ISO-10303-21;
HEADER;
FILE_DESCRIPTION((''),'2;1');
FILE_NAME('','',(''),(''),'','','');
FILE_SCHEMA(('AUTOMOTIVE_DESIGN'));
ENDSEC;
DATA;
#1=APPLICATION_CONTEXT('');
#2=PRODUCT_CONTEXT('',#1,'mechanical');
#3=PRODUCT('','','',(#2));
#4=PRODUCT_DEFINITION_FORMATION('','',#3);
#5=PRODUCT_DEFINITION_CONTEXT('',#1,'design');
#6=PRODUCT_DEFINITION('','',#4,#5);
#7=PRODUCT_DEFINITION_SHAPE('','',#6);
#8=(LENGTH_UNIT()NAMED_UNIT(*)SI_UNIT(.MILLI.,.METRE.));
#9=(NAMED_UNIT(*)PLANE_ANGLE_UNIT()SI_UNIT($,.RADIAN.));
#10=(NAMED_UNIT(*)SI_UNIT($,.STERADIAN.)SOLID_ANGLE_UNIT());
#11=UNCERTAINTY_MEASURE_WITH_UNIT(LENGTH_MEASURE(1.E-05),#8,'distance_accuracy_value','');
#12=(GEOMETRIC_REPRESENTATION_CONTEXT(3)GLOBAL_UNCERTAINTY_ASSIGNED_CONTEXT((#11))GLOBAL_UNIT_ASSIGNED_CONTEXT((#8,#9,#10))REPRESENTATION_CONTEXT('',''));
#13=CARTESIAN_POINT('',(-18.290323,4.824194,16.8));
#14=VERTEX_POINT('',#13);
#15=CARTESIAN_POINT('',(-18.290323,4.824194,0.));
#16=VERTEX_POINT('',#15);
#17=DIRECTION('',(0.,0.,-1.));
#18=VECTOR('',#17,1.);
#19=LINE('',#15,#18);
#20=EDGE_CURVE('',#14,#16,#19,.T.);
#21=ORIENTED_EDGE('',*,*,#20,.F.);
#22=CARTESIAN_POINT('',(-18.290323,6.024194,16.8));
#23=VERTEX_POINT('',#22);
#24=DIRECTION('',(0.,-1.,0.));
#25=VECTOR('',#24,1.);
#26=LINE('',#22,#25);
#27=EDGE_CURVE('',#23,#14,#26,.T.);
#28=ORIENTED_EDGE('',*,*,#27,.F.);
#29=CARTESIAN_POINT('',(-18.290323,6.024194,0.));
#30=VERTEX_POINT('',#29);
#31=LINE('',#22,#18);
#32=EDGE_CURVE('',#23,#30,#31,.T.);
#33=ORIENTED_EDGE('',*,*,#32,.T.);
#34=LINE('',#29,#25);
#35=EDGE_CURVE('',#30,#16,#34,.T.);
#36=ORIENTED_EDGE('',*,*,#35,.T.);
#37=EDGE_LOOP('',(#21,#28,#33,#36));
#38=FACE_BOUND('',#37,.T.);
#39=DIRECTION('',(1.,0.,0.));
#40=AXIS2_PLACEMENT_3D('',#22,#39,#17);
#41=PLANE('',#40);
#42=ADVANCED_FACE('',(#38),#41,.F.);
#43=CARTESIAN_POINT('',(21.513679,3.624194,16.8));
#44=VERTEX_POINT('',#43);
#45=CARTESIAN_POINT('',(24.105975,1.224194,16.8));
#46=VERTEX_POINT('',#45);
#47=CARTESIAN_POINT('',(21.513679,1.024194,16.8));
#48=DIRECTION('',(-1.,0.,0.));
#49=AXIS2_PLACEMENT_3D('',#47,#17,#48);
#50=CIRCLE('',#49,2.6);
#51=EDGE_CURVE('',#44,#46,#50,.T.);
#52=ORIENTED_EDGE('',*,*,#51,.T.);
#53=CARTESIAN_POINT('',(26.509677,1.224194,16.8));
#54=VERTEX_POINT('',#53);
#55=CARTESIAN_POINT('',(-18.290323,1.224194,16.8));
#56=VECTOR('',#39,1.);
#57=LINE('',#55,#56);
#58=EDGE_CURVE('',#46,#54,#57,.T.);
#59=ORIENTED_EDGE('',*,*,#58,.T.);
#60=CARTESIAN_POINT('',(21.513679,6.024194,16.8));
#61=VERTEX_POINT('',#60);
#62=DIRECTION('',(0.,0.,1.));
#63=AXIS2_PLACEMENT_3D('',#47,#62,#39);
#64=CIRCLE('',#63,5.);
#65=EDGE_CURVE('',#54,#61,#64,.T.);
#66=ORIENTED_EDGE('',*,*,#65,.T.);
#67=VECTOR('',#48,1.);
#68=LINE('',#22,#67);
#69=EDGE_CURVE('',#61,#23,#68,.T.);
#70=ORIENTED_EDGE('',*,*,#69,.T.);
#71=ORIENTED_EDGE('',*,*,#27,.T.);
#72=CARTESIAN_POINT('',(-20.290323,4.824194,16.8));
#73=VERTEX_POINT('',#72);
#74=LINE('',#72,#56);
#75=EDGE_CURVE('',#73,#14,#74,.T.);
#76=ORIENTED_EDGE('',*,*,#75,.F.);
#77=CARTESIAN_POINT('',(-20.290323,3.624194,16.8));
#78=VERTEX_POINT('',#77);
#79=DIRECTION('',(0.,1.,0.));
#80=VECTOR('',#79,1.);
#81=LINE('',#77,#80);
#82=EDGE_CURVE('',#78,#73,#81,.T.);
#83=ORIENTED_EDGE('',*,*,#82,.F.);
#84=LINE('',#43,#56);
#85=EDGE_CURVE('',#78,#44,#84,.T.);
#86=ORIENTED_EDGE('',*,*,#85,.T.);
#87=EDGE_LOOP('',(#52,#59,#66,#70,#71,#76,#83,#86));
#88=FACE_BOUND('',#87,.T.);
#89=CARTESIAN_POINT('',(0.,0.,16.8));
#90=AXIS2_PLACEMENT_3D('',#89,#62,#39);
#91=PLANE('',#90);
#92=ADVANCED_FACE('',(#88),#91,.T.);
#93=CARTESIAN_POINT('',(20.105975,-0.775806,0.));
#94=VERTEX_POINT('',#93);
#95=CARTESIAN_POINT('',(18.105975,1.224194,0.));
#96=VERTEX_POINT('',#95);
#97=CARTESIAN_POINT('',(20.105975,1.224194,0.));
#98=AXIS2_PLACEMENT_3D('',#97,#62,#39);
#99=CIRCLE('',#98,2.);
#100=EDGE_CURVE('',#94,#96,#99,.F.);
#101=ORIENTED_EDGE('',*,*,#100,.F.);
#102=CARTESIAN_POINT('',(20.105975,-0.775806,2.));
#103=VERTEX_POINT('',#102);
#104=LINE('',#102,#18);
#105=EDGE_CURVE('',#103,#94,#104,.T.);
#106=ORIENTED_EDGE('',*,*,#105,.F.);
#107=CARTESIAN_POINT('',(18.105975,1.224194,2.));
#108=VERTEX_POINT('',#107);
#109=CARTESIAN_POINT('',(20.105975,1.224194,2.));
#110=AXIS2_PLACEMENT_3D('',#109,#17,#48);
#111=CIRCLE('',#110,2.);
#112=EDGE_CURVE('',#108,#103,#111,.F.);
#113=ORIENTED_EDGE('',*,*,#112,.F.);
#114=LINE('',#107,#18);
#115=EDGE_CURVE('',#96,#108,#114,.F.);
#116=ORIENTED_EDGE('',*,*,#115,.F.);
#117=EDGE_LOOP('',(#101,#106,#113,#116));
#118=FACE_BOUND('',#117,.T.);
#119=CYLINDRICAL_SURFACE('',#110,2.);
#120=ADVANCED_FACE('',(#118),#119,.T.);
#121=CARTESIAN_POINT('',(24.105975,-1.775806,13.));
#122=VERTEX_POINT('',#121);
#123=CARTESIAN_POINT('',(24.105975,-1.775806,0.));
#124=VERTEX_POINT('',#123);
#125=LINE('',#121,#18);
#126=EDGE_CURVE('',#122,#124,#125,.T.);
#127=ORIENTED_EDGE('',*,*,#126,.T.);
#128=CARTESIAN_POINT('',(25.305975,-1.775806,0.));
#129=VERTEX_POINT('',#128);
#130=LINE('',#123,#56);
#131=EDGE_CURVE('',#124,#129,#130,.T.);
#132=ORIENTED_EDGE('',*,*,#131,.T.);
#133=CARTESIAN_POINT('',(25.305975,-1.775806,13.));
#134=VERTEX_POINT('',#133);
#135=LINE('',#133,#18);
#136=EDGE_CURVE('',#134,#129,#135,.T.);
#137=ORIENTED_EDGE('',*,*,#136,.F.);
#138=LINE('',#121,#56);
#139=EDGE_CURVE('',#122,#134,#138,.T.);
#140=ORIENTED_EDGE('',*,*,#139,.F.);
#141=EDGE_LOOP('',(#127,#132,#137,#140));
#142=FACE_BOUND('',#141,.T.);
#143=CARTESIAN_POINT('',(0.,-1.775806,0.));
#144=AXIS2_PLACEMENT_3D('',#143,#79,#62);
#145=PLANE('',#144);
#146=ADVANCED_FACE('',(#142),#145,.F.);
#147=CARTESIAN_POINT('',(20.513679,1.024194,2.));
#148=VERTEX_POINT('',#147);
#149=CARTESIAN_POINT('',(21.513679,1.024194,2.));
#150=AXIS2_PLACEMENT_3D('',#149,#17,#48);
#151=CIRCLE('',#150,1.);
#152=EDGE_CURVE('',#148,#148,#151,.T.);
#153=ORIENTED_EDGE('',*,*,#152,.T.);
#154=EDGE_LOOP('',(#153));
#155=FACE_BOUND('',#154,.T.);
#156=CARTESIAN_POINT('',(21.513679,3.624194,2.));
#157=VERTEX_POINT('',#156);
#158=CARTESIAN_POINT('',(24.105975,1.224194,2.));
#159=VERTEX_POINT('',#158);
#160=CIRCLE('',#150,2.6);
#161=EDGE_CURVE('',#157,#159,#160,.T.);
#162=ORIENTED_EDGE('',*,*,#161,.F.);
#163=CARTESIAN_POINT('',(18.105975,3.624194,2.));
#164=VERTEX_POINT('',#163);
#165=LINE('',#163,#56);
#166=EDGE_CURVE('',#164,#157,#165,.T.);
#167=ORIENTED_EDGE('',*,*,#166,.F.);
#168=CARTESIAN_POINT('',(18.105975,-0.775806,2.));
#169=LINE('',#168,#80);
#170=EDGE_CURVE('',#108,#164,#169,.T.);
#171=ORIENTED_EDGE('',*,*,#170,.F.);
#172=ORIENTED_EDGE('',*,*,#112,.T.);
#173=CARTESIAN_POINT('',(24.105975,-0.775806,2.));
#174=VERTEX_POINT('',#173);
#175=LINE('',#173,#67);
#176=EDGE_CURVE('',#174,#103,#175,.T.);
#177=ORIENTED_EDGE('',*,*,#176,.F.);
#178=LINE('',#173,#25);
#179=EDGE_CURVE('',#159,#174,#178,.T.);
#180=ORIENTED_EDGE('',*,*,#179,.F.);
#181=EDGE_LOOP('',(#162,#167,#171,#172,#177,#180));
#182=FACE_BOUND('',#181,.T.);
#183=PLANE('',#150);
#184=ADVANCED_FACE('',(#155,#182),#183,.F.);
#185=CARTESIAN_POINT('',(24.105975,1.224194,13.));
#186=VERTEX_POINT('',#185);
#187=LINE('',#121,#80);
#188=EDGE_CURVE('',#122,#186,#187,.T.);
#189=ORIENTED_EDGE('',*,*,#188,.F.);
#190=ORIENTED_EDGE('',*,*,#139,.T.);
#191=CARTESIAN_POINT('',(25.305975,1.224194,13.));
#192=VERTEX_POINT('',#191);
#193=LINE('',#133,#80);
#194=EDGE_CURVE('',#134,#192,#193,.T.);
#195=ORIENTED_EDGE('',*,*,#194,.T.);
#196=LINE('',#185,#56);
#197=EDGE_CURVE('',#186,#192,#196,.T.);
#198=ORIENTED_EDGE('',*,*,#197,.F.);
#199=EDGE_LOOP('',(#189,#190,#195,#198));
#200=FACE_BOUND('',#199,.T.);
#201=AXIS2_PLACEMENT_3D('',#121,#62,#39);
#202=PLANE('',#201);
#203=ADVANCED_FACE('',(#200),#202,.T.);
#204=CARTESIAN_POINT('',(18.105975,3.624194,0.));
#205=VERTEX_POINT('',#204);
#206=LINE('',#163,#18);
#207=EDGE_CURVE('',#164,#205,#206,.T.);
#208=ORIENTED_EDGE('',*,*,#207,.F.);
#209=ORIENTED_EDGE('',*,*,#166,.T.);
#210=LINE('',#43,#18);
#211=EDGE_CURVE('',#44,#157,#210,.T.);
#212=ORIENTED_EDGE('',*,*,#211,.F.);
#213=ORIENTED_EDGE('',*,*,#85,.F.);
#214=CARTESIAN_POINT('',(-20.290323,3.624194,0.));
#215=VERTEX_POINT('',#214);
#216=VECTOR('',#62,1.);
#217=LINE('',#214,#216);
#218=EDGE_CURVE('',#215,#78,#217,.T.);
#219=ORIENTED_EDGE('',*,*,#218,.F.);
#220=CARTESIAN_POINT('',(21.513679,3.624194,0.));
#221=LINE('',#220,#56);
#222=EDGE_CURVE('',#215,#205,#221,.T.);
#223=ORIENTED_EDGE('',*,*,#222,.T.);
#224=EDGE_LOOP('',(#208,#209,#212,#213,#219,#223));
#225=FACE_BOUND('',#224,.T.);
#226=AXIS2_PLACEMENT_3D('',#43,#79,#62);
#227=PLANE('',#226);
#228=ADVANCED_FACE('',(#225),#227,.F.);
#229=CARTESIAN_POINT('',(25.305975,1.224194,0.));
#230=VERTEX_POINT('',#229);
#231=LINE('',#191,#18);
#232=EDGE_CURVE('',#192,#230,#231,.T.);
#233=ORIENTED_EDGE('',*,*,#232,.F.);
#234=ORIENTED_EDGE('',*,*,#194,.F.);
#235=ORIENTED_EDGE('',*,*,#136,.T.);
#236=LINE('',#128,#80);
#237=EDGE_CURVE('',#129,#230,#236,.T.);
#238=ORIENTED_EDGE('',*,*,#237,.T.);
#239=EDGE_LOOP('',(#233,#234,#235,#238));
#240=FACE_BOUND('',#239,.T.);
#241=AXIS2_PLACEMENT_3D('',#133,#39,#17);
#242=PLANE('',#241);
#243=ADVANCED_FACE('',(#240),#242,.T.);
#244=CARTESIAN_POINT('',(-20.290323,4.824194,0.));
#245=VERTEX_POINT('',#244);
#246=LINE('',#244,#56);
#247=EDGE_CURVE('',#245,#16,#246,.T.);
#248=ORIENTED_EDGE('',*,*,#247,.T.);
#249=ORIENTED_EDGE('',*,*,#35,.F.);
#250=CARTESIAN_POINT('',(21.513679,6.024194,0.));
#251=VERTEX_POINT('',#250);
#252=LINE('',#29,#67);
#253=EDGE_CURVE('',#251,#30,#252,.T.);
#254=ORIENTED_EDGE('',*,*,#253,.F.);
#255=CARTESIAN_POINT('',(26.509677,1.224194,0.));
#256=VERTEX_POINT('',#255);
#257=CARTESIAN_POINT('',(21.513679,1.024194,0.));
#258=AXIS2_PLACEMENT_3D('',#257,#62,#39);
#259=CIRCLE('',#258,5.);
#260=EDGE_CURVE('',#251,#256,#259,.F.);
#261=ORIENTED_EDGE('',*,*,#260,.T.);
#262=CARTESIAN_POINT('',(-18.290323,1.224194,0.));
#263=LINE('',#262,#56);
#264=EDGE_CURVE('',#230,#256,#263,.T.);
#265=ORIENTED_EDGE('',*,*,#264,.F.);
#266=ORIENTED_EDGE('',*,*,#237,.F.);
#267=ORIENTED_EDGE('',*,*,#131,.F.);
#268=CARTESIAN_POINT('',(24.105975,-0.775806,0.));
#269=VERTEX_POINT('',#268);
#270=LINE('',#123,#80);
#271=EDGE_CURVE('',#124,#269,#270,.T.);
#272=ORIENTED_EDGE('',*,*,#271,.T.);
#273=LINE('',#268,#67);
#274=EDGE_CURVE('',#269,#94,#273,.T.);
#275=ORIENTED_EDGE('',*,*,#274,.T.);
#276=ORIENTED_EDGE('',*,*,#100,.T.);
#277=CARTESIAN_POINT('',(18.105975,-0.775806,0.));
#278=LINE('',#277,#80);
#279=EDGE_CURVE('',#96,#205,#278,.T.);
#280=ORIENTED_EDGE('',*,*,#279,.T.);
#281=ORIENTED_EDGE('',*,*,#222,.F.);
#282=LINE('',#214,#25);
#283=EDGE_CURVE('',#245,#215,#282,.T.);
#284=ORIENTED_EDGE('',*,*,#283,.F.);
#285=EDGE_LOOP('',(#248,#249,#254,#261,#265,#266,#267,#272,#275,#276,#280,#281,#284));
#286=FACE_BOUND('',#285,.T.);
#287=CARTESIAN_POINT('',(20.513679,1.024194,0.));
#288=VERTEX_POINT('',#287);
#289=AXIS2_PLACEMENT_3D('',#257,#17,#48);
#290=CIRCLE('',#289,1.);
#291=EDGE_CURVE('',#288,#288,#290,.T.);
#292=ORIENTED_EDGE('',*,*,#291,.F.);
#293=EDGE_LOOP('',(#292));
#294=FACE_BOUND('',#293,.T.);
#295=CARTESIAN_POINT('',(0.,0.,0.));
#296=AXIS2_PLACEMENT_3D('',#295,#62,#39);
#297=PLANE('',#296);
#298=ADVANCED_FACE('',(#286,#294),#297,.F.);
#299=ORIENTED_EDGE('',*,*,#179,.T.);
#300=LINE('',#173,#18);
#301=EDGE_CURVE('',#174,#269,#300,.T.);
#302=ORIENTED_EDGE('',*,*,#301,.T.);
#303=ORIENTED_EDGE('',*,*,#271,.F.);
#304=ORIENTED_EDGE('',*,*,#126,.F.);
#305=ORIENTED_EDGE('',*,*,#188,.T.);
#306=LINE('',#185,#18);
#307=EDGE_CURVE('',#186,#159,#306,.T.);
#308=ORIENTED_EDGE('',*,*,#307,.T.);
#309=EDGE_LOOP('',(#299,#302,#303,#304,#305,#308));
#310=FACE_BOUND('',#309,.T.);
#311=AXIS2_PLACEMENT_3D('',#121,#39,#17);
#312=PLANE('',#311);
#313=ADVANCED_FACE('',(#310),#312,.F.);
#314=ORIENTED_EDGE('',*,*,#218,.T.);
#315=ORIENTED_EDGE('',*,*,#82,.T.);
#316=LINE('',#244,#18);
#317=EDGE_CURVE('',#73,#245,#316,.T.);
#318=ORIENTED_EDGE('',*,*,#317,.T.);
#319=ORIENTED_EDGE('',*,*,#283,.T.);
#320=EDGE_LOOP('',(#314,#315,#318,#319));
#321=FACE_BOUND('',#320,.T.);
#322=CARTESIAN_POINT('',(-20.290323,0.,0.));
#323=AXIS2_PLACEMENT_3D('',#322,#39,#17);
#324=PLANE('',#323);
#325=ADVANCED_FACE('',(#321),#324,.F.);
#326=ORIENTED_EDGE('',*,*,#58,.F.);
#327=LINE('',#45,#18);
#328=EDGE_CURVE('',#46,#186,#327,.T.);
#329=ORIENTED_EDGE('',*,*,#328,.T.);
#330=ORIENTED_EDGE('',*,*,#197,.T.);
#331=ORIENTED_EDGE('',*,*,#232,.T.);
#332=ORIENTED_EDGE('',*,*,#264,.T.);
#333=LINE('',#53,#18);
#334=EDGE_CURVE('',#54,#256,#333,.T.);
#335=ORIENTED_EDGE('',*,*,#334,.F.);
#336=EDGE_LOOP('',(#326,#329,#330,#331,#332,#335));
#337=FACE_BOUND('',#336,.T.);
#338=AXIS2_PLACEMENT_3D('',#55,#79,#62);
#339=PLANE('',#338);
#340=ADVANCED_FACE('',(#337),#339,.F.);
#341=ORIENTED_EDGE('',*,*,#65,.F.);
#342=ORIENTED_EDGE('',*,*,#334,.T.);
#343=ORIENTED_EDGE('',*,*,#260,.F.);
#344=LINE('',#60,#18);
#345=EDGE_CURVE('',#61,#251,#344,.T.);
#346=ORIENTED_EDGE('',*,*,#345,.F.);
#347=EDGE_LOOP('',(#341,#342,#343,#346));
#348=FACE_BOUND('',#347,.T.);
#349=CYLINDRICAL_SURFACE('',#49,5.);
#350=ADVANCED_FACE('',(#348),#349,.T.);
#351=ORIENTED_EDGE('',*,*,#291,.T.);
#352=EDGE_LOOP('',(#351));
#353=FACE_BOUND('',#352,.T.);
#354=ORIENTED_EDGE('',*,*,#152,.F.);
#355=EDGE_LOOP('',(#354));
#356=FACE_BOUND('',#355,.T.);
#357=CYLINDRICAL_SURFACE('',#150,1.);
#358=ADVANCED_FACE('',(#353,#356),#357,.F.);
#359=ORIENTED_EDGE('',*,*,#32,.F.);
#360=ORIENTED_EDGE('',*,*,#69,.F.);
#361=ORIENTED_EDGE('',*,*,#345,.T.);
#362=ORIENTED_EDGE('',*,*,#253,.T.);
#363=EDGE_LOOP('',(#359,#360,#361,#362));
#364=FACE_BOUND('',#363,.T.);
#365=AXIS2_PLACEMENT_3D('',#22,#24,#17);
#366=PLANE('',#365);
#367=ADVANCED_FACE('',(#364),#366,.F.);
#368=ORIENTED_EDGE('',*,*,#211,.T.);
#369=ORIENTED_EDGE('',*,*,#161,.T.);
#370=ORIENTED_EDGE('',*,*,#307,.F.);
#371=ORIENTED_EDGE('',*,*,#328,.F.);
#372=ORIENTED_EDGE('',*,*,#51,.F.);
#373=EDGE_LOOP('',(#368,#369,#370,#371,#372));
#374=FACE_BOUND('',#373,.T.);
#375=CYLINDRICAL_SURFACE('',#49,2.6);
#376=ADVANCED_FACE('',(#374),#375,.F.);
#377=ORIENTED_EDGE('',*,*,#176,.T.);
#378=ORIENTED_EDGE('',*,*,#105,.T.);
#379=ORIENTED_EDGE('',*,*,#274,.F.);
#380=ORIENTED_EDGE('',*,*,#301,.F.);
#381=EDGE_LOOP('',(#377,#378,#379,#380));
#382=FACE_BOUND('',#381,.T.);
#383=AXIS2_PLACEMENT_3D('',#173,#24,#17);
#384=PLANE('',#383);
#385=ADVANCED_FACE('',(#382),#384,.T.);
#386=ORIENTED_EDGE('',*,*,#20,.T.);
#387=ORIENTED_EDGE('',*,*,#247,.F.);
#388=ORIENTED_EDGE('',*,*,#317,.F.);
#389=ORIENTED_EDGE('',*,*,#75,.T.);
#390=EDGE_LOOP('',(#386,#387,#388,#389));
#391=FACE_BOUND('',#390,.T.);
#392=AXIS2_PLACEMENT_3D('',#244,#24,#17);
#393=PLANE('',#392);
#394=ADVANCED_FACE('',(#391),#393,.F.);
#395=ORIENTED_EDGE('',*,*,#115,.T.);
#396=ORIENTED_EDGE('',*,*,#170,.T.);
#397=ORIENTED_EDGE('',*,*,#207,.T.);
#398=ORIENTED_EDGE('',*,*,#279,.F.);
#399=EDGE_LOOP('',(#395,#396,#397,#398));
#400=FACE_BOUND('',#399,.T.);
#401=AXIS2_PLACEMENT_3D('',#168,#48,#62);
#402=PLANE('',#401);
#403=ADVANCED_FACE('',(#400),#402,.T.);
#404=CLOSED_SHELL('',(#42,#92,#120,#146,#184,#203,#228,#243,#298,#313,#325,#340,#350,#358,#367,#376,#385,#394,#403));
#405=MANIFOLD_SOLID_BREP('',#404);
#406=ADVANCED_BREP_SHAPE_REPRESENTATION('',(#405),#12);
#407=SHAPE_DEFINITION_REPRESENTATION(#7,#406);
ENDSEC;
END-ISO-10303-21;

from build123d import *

# Parameters (mm, degrees)
SKETCH1_W           = 44.8
SKETCH1_H           = 4.8
BOSS_EXTRUDE1_DEPTH = 16.8
FILLET1_R           = 5
CUT_EXTRUDE1_DEPTH  = 32.95768929
SKETCH3_W           = 1.2
SKETCH3_H           = 13
BOSS_EXTRUDE2_DEPTH = 3
SKETCH4_W           = 16.8
SKETCH4_H           = 1.2
BOSS_EXTRUDE3_DEPTH = 2
SKETCH5_R           = 1
BOSS_EXTRUDE4_DEPTH = 2
FILLET2_R           = 2


with BuildPart() as part:
    # Sketch1 → Boss-Extrude1 (new body)
    with BuildSketch(Plane.XY):
        with Locations((4.109677419, 3.624193548)):
            Rectangle(SKETCH1_W, SKETCH1_H)
    extrude(amount=BOSS_EXTRUDE1_DEPTH)

    # Fillet1
    # the kernel refuses this fillet: 5 mm, written as the material it takes off along each edge
    with BuildSketch(Plane(origin=(26.509677419, 6.024193548, -12.489995997), x_dir=(-1, 0, 0), z_dir=(0, 0, 1))) as fillet1_piece_1:
        with BuildLine():
            CenterArc((4.995998399, 5), FILLET1_R, 182.292442776, 87.707557224)
            Line((0, 4.8), (-0.099919968, 4.796))
            ThreePointArc((-0.099919968, 4.796), (-0.1, 2.4), (-0.1, 0))
            Line((-0.1, 0), (0, -0.1))
            Line((0, -0.1), (4.995998399, -0.1))
            Line((4.995998399, -0.1), (4.995998399, 0))
        make_face()
    extrude(amount=41.779991994, mode=Mode.SUBTRACT)

    # Sketch2 → Cut-Extrude1 (cut, through all)
    with BuildSketch(Plane(origin=(0, 0, 0), x_dir=(-1, 0, 0), z_dir=(0, 0, -1))):
        with BuildLine():
            Line((-24.1059753, 1.224193548), (18.290322581, 1.224193548))
            Line((18.290322581, 1.224193548), (18.290322581, 3.624193548))
            Line((18.290322581, 3.624193548), (-21.513679021, 3.624193548))
            ThreePointArc((-21.513679021, 3.624193548), (-23.280031194, 2.932071951), (-24.1059753, 1.224193548))
        make_face()
    extrude(amount=-CUT_EXTRUDE1_DEPTH, mode=Mode.SUBTRACT)

    # Sketch3 → Boss-Extrude2 (add)
    with BuildSketch(Plane.XZ.offset(-1.224193548)):
        with Locations((24.7059753, 6.5)):
            Rectangle(SKETCH3_W, SKETCH3_H)
    extrude(amount=BOSS_EXTRUDE2_DEPTH)

    # Sketch4 → Boss-Extrude3 (add)
    with BuildSketch(Plane.ZY.offset(18.290322581)):
        with Locations((8.4, 4.224193548)):
            Rectangle(SKETCH4_W, SKETCH4_H)
    extrude(amount=BOSS_EXTRUDE3_DEPTH)

    # Sketch5 → Boss-Extrude4 (add)
    with BuildSketch(Plane(origin=(0, 0, 0), x_dir=(-1, 0, 0), z_dir=(0, 0, -1))):
        with BuildLine():
            Line((-18.1059753, -0.775806452), (-18.1059753, 3.624193548))
            Line((-18.1059753, 3.624193548), (-21.513679021, 3.624193548))
            ThreePointArc((-21.513679021, 3.624193548), (-23.280031194, 2.932071951), (-24.1059753, 1.224193548))
            Line((-24.1059753, 1.224193548), (-24.1059753, -0.775806452))
            Line((-24.1059753, -0.775806452), (-18.1059753, -0.775806452))
        make_face()
        with Locations((-21.513679021, 1.024193548)):
            Circle(SKETCH5_R, mode=Mode.SUBTRACT)
    extrude(amount=-BOSS_EXTRUDE4_DEPTH)

    # Fillet2
    fillet2_edges = [part.edges().sort_by_distance(p)[0] for p in [
        (18.1059753, -0.775806452, 1),
    ]]
    fillet(fillet2_edges, radius=FILLET2_R)


solid = part.part
